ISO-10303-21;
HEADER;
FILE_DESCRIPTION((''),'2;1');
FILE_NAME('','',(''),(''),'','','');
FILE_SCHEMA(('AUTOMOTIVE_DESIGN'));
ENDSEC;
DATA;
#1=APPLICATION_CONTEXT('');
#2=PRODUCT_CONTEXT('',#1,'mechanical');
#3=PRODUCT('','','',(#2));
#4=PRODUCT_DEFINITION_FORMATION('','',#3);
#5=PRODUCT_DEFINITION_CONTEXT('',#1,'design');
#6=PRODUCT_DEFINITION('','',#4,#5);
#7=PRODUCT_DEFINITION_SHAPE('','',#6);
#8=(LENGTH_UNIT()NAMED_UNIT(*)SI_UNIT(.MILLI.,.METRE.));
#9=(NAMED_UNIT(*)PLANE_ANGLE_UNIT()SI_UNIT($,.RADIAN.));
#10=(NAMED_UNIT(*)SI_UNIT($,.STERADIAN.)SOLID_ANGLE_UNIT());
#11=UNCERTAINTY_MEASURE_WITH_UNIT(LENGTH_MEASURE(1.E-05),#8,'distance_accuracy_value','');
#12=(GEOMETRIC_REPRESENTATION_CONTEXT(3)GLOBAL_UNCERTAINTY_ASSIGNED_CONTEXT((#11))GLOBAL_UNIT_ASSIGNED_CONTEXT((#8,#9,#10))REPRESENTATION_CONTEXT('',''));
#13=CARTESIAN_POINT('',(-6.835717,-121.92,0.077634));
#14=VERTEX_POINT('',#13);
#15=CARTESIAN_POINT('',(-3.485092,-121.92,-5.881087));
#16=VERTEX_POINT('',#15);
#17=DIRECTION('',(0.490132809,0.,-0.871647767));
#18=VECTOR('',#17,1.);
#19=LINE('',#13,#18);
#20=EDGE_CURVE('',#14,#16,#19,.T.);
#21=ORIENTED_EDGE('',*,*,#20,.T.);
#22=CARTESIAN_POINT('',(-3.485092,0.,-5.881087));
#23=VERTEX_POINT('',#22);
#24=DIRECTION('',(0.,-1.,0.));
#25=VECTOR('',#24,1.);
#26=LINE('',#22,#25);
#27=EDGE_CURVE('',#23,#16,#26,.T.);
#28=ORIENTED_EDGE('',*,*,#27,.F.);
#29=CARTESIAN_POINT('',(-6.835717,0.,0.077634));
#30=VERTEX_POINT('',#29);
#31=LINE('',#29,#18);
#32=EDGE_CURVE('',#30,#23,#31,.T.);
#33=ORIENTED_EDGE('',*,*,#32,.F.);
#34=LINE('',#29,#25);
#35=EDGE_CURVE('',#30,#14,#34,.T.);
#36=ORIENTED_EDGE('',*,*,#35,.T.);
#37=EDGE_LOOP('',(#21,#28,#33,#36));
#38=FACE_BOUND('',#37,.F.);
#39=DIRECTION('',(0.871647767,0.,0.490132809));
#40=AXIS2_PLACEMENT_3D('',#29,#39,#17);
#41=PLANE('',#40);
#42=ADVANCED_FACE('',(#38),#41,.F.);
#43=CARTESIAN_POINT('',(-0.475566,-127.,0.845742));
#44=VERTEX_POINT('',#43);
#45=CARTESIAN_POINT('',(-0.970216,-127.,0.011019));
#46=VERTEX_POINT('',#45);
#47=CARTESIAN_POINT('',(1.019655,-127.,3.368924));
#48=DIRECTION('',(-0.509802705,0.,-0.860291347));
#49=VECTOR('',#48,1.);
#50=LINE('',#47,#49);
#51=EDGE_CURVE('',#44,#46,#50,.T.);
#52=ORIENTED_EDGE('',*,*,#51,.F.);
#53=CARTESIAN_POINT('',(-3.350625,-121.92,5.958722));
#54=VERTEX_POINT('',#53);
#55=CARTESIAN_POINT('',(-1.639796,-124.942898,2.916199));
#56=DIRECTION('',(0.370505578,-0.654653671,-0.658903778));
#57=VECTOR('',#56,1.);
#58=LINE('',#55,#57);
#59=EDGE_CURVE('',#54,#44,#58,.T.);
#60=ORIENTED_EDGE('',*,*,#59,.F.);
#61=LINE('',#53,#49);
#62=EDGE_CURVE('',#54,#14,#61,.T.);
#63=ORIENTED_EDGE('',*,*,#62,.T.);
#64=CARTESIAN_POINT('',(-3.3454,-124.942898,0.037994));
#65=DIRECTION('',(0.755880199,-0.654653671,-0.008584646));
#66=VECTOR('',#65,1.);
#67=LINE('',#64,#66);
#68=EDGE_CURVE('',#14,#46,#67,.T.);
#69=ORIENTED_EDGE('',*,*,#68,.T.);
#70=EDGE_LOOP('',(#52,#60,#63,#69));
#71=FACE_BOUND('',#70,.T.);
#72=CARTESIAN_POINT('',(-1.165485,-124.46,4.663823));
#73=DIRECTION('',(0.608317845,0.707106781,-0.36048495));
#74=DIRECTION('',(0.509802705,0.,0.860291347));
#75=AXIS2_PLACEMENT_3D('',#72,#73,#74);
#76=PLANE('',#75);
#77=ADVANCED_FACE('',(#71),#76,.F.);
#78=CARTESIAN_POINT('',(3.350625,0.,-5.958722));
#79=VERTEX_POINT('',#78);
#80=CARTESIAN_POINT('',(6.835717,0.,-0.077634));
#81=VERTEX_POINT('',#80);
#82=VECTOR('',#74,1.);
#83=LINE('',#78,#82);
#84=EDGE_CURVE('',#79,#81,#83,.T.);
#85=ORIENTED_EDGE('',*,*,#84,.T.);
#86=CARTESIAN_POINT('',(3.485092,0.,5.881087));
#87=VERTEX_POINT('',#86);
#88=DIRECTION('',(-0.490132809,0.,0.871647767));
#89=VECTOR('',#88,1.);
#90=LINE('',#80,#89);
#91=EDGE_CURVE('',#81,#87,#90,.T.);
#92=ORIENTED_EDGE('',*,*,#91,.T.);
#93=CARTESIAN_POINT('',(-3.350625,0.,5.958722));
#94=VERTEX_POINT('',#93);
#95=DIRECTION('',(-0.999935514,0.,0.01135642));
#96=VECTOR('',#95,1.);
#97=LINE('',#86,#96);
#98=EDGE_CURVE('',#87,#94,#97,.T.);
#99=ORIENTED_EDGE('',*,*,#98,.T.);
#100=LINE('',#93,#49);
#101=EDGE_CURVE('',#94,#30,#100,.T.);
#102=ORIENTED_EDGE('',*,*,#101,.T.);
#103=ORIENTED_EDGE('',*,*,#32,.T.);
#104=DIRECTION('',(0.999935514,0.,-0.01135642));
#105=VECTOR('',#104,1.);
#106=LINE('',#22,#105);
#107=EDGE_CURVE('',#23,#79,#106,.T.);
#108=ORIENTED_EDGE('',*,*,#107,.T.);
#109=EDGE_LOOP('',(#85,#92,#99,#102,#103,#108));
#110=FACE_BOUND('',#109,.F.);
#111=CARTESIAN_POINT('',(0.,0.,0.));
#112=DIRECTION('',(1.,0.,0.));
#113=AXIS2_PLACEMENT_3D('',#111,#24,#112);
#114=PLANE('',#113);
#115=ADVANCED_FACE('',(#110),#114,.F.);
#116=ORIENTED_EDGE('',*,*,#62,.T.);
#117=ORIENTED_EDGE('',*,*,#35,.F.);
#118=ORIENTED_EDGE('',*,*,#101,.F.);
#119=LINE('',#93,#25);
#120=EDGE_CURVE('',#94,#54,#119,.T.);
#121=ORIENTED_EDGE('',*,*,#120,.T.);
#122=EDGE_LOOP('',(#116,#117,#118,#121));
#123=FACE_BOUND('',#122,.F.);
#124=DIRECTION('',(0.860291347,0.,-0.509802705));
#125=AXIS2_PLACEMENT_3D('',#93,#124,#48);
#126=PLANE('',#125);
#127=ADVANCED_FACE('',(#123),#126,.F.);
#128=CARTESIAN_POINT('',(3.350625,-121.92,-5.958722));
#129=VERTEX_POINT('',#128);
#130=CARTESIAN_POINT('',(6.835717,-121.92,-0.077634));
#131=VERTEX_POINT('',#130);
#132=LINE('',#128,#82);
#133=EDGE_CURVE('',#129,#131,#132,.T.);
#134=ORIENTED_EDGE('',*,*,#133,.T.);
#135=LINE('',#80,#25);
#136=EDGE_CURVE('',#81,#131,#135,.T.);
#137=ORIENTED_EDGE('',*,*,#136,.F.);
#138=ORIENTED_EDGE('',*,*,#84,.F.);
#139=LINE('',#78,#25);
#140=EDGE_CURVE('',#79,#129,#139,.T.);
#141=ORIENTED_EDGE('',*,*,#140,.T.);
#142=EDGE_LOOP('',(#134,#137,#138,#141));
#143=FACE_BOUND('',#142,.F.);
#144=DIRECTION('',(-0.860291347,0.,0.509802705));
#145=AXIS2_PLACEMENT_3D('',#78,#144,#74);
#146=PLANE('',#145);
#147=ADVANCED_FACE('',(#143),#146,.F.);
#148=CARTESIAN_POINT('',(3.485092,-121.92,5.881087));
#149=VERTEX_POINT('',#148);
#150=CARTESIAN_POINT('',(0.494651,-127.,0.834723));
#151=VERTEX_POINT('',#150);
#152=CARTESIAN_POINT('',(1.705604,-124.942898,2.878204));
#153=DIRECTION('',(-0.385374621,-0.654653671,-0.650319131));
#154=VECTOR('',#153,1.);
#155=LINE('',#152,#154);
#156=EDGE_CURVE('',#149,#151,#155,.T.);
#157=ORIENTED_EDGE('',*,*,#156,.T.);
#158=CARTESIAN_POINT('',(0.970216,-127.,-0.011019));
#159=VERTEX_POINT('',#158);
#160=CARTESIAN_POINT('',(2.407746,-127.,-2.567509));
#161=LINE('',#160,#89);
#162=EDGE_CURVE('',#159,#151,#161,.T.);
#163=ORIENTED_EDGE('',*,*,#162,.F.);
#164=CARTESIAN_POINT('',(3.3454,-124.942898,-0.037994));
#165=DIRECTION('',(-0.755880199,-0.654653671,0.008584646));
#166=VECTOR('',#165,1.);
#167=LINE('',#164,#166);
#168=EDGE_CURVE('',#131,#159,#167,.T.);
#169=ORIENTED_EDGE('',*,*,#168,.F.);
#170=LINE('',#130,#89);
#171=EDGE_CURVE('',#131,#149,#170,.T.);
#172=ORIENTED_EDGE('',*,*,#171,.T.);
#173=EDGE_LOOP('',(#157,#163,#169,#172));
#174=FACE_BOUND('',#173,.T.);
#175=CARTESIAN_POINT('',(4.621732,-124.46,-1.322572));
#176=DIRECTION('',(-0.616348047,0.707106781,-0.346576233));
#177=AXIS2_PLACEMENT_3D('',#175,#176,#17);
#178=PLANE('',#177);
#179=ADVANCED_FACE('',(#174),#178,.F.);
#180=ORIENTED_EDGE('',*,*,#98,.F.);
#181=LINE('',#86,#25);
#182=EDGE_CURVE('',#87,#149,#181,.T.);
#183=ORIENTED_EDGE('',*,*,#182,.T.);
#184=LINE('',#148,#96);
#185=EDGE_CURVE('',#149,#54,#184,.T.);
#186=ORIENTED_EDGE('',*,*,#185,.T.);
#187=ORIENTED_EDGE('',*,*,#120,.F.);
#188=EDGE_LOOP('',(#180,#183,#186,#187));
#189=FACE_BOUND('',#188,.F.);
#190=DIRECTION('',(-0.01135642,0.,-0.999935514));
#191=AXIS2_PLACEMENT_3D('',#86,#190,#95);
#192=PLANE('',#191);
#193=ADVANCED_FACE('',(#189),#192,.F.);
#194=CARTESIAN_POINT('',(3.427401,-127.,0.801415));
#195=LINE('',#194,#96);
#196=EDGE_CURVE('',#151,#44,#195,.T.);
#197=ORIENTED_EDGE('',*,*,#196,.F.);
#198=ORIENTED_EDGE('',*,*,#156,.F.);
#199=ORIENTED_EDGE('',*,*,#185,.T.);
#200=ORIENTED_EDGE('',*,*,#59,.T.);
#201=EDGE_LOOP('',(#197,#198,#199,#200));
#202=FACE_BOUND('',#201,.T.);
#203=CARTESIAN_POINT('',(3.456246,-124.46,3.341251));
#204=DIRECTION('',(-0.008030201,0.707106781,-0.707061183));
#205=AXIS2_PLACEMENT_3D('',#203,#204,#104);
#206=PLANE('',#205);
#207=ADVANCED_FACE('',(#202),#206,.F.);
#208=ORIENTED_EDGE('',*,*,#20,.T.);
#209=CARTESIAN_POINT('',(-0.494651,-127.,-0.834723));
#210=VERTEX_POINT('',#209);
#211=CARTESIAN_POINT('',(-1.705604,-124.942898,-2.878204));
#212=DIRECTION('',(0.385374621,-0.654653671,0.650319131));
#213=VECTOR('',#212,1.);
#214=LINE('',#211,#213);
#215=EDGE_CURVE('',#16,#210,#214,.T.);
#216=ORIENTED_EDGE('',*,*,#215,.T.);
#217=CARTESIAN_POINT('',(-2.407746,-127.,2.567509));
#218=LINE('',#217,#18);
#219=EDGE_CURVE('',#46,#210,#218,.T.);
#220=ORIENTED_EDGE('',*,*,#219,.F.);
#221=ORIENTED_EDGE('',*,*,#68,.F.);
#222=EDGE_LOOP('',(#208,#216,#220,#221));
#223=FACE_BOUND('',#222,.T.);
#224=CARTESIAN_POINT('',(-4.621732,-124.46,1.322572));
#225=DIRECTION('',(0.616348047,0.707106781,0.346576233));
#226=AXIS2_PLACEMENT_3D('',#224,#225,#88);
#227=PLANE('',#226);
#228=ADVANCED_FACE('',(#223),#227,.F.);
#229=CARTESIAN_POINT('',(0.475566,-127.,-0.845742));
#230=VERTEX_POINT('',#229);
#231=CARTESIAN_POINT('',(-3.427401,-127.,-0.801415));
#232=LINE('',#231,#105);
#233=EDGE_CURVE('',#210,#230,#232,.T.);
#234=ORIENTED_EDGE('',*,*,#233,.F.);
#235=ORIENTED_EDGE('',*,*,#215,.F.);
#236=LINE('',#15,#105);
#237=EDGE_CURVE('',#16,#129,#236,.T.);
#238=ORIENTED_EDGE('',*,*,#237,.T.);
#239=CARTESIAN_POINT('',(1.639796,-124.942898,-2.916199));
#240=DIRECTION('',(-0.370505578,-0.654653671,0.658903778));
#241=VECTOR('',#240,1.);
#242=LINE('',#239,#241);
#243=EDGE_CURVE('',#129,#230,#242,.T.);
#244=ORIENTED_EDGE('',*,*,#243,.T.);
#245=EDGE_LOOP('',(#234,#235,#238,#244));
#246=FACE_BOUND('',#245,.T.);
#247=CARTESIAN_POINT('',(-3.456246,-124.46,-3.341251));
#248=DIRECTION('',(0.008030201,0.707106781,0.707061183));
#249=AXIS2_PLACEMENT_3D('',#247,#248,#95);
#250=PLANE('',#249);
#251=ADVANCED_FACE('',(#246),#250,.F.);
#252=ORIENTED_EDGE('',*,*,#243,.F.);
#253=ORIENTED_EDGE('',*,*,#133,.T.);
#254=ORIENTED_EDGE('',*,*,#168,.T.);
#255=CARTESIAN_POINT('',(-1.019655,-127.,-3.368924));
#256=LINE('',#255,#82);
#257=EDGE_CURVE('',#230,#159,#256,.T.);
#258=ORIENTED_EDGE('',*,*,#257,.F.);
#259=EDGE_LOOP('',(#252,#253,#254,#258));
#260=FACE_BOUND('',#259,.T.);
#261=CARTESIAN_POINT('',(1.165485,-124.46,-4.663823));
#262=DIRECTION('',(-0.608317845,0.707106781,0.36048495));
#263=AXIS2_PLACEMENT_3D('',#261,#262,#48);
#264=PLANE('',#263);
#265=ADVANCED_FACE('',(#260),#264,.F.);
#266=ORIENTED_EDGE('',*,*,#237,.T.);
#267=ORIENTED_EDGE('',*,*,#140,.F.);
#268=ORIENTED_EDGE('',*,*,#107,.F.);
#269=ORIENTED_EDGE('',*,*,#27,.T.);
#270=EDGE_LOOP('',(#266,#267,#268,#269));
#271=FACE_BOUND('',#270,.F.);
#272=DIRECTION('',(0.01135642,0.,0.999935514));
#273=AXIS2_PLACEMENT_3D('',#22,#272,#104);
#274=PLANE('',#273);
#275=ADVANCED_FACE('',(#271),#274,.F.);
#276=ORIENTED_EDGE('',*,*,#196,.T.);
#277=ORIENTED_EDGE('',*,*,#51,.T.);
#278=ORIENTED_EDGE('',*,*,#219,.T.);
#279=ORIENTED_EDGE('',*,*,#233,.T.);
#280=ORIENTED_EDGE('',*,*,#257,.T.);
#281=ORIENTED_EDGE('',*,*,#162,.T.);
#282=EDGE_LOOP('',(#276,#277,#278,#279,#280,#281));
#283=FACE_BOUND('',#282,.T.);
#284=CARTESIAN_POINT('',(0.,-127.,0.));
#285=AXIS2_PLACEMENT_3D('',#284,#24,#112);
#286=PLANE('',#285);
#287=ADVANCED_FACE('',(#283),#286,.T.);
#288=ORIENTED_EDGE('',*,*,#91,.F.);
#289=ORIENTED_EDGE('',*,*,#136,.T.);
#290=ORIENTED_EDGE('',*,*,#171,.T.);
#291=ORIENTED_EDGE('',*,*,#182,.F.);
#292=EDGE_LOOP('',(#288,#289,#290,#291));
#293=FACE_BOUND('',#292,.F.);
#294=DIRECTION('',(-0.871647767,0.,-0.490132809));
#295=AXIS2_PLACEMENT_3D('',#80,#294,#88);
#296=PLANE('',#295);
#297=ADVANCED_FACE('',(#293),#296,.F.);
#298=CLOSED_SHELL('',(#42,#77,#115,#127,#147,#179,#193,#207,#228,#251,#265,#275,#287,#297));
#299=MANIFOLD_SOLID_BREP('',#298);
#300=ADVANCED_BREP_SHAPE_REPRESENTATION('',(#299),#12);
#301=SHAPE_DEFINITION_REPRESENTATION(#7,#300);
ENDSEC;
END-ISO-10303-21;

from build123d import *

# Parameters (mm, degrees)
F2_DEPTH = 127
F4_SIZE  = 5.08


# Not quite as in the source:
# - the program builds the solid bodies; features that only make, move or delete a surface that nothing else refers to are left out


with BuildPart() as f2:
    # F1 (on Front) → F2 (new body)
    with BuildSketch(Plane.XZ):
        Polygon((6.8357169452, -0.0776342775), (3.4850917291, 5.8810873888), (-3.3506252161, 5.9587216663), (-6.8357169452, 0.0776342775), (-3.4850917291, -5.8810873888), (3.3506252161, -5.9587216663), align=None)
    extrude(amount=F2_DEPTH)

    # F4
    f4_edges = [f2.edges().sort_by_distance(p)[0] for p in [
        (5.160404, -127, 2.901727),
        (0.067233, -127, 5.919905),
        (-5.093171, -127, 3.018178),
        (-5.160404, -127, -2.901727),
        (-0.067233, -127, -5.919905),
        (5.093171, -127, -3.018178),
    ]]
    chamfer(f4_edges, length=F4_SIZE)


solid = f2.part
